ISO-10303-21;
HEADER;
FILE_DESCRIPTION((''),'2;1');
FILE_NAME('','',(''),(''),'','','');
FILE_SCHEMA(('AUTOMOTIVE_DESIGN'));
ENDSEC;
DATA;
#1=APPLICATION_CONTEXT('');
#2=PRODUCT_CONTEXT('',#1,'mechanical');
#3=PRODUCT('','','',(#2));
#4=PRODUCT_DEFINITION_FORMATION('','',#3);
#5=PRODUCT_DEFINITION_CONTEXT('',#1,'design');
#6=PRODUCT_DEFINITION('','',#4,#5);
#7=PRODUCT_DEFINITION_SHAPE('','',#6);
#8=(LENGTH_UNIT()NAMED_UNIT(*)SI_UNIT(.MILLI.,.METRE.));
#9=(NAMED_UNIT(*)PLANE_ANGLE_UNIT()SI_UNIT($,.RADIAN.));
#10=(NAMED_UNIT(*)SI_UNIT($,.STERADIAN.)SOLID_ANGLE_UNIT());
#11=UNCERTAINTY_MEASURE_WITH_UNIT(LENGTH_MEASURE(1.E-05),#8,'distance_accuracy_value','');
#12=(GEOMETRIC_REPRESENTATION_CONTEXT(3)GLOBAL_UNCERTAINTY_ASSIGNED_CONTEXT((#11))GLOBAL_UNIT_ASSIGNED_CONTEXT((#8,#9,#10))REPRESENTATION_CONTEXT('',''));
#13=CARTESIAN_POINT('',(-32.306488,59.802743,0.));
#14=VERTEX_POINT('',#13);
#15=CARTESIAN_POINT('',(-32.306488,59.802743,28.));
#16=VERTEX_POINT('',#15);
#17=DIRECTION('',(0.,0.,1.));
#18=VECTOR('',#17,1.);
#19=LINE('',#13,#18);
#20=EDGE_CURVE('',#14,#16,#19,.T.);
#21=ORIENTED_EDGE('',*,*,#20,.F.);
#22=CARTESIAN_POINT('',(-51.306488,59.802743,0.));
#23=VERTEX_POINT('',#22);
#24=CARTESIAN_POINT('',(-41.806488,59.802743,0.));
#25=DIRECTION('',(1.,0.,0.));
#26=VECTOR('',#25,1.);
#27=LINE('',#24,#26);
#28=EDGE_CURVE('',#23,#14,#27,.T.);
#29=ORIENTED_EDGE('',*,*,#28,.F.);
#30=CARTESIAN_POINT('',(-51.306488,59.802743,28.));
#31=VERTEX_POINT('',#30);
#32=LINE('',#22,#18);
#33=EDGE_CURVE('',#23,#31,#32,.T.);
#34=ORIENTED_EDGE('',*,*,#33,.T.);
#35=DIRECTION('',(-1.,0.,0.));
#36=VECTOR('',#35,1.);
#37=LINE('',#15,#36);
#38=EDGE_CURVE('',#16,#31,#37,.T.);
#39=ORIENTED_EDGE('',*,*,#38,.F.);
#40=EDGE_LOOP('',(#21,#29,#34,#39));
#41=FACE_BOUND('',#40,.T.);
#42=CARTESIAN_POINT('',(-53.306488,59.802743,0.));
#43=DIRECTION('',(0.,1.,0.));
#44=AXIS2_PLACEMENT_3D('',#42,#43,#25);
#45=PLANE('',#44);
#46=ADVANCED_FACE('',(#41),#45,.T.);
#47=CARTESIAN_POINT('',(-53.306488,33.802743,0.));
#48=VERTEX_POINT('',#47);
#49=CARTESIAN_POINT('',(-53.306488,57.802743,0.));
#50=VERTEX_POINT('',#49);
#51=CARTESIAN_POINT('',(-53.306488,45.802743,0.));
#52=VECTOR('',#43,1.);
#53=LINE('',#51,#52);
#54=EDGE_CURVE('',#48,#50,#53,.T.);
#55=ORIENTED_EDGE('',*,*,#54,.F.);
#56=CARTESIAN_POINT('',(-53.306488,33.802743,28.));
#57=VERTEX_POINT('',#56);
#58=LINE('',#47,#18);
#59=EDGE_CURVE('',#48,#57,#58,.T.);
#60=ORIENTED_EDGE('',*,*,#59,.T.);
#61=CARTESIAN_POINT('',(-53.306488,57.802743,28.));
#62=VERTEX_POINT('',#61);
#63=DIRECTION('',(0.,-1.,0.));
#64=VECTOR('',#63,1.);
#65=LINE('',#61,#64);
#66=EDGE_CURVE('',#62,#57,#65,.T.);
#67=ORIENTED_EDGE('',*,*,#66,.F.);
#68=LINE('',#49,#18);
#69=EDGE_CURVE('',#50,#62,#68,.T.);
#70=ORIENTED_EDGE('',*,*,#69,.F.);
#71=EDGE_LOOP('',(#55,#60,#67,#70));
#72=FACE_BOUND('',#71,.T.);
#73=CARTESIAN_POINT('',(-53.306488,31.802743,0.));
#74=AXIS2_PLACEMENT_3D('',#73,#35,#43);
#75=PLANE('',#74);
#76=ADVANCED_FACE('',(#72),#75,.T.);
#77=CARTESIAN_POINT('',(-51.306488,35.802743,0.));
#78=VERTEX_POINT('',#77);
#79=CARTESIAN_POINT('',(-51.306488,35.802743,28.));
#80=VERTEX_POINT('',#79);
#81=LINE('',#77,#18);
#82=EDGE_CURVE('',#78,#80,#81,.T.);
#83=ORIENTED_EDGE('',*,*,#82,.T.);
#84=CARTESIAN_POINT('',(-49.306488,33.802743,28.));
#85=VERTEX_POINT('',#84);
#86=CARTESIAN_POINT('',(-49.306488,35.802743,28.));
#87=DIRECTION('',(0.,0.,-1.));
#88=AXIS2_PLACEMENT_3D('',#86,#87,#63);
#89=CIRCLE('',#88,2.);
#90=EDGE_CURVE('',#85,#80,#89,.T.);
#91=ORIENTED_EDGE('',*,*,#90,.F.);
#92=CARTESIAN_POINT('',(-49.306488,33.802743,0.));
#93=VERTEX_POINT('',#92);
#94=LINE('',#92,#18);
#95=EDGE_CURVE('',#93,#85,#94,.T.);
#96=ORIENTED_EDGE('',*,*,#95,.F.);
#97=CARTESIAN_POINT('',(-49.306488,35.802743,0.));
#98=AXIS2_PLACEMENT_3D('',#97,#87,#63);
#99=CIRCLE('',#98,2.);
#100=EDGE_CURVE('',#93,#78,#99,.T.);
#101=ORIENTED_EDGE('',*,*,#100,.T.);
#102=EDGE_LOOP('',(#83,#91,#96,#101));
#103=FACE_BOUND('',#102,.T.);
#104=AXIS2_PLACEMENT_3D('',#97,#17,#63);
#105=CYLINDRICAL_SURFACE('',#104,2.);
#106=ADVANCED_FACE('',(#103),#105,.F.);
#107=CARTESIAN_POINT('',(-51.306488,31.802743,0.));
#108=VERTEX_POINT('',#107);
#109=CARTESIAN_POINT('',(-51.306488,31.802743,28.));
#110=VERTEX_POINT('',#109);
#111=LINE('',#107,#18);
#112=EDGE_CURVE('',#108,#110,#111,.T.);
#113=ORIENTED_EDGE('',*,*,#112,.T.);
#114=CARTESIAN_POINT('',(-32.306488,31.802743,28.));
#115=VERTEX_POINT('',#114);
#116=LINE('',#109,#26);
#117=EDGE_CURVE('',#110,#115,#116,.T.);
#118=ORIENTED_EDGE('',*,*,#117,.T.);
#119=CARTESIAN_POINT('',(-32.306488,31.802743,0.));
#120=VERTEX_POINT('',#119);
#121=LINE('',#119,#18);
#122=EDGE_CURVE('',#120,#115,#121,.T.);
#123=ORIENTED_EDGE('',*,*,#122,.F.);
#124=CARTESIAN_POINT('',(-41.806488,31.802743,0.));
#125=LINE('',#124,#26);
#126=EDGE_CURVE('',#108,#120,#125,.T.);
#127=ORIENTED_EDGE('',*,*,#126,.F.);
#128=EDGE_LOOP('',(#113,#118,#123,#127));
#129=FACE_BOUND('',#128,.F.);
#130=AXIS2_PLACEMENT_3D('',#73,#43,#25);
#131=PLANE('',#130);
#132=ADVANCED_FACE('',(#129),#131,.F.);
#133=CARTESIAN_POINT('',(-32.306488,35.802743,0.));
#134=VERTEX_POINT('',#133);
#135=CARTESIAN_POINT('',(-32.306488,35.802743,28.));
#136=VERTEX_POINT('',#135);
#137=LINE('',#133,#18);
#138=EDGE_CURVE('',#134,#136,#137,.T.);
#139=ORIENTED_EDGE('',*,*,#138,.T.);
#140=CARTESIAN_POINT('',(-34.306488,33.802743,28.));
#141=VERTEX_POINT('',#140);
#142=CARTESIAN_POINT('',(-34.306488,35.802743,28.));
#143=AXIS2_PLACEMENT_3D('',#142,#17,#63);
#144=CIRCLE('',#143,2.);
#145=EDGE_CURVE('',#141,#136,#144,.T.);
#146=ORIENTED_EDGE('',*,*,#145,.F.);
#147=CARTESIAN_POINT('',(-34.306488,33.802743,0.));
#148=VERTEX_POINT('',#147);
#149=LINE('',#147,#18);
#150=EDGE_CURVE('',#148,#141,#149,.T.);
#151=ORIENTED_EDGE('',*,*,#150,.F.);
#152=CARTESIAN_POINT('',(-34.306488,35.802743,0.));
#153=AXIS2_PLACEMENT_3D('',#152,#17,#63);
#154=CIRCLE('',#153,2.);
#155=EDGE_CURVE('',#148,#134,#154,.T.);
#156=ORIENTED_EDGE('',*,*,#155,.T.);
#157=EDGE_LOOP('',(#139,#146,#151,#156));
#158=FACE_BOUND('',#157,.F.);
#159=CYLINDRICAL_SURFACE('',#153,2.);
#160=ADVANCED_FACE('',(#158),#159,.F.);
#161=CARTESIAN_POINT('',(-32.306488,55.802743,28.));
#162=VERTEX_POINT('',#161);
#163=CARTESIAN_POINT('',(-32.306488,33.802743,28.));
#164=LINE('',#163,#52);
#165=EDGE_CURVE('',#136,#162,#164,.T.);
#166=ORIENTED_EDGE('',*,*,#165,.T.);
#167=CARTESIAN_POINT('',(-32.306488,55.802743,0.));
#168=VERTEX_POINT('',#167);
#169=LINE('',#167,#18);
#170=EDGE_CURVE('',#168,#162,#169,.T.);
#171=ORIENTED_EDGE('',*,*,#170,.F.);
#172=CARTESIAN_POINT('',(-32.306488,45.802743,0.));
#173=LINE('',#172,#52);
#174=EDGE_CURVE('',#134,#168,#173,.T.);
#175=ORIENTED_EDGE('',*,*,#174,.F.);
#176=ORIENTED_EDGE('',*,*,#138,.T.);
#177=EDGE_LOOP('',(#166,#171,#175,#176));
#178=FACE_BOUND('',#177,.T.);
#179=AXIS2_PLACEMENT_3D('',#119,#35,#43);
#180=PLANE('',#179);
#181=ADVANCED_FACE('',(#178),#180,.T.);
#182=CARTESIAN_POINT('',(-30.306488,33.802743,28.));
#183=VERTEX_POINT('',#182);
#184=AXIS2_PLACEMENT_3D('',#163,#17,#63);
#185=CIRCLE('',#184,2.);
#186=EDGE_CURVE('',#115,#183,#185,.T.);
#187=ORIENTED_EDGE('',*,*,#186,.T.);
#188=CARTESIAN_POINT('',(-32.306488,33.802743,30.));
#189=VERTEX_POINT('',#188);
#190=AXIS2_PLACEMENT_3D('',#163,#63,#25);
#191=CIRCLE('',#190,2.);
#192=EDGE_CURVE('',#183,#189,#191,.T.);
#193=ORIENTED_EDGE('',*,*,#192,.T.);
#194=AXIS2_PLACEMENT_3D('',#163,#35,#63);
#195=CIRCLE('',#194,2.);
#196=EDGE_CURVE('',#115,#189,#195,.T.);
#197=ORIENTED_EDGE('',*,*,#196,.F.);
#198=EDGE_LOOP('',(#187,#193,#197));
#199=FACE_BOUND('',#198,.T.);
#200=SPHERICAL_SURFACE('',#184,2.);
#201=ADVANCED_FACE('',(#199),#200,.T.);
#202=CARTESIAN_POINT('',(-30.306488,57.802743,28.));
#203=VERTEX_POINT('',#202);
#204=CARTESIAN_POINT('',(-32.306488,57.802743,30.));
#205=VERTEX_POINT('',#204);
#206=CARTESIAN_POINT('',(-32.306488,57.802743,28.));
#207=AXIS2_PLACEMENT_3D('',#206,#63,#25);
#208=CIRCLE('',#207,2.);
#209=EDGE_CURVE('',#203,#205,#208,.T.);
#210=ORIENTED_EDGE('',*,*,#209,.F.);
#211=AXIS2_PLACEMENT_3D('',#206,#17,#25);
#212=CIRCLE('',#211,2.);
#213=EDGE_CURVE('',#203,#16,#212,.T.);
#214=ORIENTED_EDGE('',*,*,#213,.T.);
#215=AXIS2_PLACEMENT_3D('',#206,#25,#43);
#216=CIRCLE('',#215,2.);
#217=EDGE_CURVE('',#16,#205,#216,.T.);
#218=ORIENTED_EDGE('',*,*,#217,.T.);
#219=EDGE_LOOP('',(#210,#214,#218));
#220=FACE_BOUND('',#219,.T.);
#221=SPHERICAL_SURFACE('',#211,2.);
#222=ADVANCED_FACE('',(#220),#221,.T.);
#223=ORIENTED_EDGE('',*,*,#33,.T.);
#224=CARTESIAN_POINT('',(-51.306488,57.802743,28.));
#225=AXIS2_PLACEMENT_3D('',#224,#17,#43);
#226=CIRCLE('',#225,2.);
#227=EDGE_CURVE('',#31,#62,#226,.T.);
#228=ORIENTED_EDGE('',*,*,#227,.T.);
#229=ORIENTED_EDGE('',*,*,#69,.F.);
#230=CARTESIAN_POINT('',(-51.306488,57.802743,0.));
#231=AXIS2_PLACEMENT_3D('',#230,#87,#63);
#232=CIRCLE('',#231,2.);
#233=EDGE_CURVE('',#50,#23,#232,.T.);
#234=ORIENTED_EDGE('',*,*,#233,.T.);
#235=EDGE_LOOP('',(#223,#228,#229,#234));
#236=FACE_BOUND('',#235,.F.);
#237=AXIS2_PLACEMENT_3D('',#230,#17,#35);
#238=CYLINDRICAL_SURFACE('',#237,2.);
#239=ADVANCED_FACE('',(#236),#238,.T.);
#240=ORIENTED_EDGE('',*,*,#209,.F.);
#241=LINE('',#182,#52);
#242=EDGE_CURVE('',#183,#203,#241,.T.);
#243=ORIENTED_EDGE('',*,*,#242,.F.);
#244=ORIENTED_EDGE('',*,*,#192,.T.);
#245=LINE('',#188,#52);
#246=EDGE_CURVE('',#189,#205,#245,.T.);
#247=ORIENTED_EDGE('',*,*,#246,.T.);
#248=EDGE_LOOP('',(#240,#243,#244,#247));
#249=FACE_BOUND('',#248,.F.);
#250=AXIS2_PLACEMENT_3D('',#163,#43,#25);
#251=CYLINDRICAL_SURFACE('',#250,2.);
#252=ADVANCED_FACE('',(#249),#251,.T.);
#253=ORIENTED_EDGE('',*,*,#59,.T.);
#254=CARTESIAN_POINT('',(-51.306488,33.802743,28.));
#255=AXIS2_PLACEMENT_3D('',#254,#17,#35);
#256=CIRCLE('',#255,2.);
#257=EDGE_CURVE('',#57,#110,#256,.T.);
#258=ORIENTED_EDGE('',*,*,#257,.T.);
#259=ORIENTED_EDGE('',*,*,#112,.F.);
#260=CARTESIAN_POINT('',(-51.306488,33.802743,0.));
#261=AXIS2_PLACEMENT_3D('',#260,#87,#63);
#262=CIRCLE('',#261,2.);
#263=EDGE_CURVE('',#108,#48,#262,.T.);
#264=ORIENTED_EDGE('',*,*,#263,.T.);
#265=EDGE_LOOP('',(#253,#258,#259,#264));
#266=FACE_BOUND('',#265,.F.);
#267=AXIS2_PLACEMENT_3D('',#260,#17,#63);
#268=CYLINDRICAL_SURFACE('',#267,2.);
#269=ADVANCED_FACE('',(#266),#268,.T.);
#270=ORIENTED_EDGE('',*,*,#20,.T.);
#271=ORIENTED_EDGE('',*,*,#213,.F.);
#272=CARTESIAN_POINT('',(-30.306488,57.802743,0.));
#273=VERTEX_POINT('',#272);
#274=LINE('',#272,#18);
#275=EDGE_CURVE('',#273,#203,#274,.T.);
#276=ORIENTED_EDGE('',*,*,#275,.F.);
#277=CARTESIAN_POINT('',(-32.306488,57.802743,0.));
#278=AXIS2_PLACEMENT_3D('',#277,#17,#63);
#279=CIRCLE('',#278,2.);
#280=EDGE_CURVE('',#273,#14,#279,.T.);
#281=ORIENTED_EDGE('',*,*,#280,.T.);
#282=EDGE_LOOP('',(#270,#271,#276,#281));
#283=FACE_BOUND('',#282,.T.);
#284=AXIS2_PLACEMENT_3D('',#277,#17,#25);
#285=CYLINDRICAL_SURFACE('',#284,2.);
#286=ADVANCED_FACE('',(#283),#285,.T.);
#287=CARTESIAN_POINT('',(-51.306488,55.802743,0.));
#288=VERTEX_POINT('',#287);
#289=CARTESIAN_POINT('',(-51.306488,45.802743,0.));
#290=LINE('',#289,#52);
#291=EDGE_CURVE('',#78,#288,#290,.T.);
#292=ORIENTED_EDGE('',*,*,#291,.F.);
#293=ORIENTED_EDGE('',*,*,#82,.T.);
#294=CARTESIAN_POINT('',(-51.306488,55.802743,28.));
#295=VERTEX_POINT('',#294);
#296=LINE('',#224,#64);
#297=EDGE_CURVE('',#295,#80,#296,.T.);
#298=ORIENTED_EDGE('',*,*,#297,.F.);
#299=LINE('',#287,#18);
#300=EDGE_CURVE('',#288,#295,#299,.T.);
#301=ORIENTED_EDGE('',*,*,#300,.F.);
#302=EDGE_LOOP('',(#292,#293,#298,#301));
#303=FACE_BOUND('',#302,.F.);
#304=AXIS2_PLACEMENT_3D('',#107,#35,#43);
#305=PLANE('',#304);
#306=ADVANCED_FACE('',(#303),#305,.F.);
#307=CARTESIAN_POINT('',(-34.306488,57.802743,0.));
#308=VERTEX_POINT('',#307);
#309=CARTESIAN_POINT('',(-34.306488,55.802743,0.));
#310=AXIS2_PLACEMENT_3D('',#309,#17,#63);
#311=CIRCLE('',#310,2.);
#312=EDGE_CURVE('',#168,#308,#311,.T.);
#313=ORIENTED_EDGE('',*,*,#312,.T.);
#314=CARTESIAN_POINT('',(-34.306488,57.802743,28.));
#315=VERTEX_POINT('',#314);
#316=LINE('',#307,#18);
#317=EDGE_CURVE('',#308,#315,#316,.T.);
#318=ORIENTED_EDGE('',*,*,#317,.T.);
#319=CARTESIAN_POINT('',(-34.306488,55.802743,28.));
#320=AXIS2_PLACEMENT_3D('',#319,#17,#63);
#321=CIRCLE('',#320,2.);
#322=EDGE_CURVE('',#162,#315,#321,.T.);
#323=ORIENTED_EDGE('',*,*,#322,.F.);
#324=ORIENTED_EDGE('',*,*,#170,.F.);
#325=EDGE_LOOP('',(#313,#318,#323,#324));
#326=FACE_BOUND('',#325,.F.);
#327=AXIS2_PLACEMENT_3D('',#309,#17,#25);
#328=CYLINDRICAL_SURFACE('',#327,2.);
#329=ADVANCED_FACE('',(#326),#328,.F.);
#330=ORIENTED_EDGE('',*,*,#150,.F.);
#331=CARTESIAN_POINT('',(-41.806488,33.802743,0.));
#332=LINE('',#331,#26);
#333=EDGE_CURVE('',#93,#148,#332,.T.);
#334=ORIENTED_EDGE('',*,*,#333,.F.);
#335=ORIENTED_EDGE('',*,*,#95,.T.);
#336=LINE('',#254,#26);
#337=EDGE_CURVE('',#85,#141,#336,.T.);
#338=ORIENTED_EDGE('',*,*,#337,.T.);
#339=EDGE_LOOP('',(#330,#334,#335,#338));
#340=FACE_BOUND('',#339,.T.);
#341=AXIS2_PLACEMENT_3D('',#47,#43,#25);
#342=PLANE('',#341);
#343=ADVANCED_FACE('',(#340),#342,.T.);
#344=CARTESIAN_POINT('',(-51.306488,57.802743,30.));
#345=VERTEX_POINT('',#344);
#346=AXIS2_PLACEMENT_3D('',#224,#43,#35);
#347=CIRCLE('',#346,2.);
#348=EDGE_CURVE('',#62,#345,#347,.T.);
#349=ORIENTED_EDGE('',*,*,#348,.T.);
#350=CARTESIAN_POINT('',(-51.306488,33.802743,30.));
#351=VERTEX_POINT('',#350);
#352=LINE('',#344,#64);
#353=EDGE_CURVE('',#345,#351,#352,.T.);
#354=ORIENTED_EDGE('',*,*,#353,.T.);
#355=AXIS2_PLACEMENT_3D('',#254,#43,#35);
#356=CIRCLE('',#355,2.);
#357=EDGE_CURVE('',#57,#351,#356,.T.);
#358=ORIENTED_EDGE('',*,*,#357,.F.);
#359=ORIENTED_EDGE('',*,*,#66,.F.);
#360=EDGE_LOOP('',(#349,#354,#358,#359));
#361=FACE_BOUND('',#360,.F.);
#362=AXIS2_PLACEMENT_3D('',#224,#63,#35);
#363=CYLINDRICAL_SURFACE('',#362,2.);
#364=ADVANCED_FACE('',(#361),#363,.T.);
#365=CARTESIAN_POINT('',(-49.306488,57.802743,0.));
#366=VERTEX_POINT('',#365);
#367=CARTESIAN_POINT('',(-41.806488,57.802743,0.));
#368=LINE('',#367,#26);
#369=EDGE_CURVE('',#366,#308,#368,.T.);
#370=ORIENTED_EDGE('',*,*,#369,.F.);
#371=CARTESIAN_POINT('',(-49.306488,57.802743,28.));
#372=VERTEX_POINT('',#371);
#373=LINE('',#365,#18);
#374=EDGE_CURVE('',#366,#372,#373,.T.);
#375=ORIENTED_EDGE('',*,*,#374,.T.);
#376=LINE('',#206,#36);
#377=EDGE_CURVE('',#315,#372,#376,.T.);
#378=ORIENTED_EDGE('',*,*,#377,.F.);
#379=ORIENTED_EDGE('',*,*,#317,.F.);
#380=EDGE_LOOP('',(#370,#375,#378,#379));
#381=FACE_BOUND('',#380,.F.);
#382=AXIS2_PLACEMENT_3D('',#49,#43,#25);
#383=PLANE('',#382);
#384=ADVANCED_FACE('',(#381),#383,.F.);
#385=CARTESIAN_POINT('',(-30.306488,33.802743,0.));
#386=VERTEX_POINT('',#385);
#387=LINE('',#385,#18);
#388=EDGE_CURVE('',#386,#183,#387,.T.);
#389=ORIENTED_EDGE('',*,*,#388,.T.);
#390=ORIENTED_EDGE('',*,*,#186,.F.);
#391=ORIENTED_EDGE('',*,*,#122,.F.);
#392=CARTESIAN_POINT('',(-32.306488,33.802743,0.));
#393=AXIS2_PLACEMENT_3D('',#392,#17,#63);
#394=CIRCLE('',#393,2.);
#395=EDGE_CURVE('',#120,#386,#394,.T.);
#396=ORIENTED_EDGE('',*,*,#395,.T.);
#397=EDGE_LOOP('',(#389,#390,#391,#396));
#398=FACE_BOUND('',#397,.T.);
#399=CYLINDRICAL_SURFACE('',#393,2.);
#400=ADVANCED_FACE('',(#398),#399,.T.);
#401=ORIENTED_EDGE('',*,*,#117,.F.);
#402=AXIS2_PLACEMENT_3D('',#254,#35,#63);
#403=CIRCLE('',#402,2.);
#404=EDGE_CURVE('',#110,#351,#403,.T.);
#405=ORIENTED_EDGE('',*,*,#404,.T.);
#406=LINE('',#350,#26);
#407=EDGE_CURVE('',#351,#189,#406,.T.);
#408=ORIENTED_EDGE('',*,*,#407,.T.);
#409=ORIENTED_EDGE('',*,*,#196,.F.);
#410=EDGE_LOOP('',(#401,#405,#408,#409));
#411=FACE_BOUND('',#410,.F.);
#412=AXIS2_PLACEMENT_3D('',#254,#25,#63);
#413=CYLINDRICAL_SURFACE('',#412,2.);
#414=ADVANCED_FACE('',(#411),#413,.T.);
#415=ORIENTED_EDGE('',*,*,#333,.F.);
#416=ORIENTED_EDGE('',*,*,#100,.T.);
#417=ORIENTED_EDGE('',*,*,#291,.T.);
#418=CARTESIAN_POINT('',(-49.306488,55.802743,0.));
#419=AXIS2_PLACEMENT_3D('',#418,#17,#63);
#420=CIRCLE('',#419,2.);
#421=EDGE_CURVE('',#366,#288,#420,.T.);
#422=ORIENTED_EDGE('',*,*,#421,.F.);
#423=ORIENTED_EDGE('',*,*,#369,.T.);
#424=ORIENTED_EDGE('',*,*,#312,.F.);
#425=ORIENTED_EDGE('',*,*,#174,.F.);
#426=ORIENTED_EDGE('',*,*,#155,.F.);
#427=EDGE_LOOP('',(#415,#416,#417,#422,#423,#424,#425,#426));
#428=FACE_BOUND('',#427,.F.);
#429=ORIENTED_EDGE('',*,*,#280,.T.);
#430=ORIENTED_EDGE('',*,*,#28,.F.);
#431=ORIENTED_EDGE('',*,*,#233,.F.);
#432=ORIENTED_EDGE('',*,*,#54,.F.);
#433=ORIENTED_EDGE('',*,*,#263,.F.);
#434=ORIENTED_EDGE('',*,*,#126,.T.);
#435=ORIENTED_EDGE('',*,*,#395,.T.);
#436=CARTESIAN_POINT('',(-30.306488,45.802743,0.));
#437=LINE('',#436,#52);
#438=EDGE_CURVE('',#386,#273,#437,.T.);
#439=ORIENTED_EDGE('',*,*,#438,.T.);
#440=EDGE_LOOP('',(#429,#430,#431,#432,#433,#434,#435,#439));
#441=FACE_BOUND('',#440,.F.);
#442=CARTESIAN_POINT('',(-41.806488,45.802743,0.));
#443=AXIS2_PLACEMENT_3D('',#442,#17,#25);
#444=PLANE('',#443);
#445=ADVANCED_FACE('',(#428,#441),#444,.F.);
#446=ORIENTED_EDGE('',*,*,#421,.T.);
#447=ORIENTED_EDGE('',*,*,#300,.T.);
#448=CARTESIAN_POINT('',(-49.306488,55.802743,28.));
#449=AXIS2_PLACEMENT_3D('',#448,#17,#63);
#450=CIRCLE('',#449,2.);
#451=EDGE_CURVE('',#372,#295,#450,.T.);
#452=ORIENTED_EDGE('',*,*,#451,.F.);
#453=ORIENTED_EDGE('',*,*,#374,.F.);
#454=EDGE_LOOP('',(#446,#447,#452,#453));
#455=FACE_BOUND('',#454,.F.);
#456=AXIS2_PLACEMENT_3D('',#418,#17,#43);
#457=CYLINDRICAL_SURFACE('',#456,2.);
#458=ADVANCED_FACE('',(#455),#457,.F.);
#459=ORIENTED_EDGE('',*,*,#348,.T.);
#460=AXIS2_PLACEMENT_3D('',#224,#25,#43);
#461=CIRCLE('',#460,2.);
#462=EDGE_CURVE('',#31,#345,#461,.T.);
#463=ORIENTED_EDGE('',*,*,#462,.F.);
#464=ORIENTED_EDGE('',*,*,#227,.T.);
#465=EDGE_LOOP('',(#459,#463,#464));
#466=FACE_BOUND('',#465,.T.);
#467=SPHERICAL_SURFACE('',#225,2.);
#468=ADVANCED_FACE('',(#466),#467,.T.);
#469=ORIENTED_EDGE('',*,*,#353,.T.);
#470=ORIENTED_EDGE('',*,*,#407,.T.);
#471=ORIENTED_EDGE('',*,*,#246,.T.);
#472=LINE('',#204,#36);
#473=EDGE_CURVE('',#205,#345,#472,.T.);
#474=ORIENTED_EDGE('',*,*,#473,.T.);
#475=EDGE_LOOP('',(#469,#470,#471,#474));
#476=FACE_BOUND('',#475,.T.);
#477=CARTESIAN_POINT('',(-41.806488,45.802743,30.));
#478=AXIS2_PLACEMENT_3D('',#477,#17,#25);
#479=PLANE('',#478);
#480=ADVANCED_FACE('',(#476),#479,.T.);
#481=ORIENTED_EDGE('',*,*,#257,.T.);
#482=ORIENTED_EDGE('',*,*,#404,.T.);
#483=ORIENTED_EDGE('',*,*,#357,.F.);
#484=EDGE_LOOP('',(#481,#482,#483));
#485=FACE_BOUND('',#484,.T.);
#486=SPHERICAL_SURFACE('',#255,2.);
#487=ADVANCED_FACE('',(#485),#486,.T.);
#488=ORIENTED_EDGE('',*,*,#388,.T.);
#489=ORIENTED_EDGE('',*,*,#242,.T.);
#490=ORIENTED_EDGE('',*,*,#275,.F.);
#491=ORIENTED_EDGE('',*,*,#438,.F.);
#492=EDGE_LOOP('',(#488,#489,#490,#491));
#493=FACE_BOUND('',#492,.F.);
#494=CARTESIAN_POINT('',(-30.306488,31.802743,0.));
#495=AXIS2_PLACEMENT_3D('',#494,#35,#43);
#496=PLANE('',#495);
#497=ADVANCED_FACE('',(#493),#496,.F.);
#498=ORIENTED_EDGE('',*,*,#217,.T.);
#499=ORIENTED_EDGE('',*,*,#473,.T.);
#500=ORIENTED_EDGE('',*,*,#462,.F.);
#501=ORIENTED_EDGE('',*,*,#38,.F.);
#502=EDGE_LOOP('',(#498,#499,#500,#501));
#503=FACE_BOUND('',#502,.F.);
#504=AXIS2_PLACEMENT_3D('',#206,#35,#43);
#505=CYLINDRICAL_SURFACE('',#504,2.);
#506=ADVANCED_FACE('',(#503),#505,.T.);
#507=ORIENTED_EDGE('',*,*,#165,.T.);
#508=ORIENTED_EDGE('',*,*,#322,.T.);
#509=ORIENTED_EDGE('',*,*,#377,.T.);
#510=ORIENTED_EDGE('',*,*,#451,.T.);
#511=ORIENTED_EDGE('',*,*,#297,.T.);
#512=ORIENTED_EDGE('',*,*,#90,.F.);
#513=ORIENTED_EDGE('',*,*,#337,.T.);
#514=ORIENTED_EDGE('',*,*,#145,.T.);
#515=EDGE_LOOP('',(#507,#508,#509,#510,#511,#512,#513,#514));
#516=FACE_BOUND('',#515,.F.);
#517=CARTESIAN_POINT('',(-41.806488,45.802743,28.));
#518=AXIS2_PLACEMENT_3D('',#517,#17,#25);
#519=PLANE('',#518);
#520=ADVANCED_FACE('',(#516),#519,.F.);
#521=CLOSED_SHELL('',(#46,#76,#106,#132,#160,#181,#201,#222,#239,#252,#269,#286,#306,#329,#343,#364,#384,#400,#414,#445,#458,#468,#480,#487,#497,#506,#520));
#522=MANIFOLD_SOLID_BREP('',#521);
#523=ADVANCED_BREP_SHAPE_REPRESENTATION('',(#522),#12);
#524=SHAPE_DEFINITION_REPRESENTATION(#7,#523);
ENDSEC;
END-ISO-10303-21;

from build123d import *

# Parameters (mm, degrees)
F0_W     = 23
F0_H     = 28
F1_DEPTH = 30
F2_R     = 2
F3_R     = 2
F4_R     = 2
F5_R     = 2
F6_R     = 2
F7_T     = 2
F8_R     = 2


# Not quite as in the source:
# - a feature of the source that left no trace in its solid (it failed there, or was rolled back) is left out
# - a shell that OpenCascade refuses in one call is made with other operations: the cavity is built on its own and cut out


with BuildPart() as f1:
    # F0 (on Top) → F1 (new body)
    with BuildSketch(Plane.XY):
        with Locations((-41.8064879576, 45.8027429283)):
            Rectangle(F0_W, F0_H)
    extrude(amount=F1_DEPTH)

    # F2
    f2_edges = [f1.edges().sort_by_distance(p)[0] for p in [
        (-30.306488, 31.802743, 15),
    ]]
    fillet(f2_edges, radius=F2_R)

    # F3
    f3_edges = [f1.edges().sort_by_distance(p)[0] for p in [
        (-30.306488, 59.802743, 15),
    ]]
    fillet(f3_edges, radius=F3_R)

    # F4
    f4_edges = [f1.edges().sort_by_distance(p)[0] for p in [
        (-53.306488, 31.802743, 15),
    ]]
    fillet(f4_edges, radius=F4_R)

    # F5
    f5_edges = [f1.edges().sort_by_distance(p)[0] for p in [
        (-53.306488, 59.802743, 15),
    ]]
    fillet(f5_edges, radius=F5_R)

    # F6
    f6_edges = [f1.edges().sort_by_distance(p)[0] for p in [
        (-41.806488, 31.802743, 30),
    ]]
    fillet(f6_edges, radius=F6_R)

    # F7: shell of thickness 2, made by hand


with BuildPart() as f7_core1:
    # F7_t2: copy of F1
    add(f1.part)

    # the walls: a layer under each face that stays
    f7_faces = [f7_core1.faces().sort_by_distance(p)[0] for p in [
        (-53.3064879576, 45.8027429283, 14),
        (-41.8064879576, 59.8027429283, 14),
        (-41.8064879576, 45.8027429283, 30),
        (-41.8064879576, 31.8027429283, 14),
        (-30.3064879576, 45.8027429283, 14),
    ]]
    thicken(f7_faces, amount=-F7_T, mode=Mode.SUBTRACT)


with BuildPart() as f1_1:
    add(f1.part)

    # what is left inside the walls is the cavity
    f7_cavity = [f7_core1.part.solids().sort_by_distance(p)[0] for p in [
        (-51.286488, 45.802743, 18.666667),
    ]]
    add(f7_cavity, mode=Mode.SUBTRACT)

    # F8
    f8_edges = [f1_1.edges().sort_by_distance(p)[0] for p in [
        (-51.306488, 57.802743, 14),
        (-51.306488, 33.802743, 14),
        (-32.306488, 33.802743, 14),
        (-32.306488, 57.802743, 14),
    ]]
    fillet(f8_edges, radius=F8_R)


solid = f1_1.part
